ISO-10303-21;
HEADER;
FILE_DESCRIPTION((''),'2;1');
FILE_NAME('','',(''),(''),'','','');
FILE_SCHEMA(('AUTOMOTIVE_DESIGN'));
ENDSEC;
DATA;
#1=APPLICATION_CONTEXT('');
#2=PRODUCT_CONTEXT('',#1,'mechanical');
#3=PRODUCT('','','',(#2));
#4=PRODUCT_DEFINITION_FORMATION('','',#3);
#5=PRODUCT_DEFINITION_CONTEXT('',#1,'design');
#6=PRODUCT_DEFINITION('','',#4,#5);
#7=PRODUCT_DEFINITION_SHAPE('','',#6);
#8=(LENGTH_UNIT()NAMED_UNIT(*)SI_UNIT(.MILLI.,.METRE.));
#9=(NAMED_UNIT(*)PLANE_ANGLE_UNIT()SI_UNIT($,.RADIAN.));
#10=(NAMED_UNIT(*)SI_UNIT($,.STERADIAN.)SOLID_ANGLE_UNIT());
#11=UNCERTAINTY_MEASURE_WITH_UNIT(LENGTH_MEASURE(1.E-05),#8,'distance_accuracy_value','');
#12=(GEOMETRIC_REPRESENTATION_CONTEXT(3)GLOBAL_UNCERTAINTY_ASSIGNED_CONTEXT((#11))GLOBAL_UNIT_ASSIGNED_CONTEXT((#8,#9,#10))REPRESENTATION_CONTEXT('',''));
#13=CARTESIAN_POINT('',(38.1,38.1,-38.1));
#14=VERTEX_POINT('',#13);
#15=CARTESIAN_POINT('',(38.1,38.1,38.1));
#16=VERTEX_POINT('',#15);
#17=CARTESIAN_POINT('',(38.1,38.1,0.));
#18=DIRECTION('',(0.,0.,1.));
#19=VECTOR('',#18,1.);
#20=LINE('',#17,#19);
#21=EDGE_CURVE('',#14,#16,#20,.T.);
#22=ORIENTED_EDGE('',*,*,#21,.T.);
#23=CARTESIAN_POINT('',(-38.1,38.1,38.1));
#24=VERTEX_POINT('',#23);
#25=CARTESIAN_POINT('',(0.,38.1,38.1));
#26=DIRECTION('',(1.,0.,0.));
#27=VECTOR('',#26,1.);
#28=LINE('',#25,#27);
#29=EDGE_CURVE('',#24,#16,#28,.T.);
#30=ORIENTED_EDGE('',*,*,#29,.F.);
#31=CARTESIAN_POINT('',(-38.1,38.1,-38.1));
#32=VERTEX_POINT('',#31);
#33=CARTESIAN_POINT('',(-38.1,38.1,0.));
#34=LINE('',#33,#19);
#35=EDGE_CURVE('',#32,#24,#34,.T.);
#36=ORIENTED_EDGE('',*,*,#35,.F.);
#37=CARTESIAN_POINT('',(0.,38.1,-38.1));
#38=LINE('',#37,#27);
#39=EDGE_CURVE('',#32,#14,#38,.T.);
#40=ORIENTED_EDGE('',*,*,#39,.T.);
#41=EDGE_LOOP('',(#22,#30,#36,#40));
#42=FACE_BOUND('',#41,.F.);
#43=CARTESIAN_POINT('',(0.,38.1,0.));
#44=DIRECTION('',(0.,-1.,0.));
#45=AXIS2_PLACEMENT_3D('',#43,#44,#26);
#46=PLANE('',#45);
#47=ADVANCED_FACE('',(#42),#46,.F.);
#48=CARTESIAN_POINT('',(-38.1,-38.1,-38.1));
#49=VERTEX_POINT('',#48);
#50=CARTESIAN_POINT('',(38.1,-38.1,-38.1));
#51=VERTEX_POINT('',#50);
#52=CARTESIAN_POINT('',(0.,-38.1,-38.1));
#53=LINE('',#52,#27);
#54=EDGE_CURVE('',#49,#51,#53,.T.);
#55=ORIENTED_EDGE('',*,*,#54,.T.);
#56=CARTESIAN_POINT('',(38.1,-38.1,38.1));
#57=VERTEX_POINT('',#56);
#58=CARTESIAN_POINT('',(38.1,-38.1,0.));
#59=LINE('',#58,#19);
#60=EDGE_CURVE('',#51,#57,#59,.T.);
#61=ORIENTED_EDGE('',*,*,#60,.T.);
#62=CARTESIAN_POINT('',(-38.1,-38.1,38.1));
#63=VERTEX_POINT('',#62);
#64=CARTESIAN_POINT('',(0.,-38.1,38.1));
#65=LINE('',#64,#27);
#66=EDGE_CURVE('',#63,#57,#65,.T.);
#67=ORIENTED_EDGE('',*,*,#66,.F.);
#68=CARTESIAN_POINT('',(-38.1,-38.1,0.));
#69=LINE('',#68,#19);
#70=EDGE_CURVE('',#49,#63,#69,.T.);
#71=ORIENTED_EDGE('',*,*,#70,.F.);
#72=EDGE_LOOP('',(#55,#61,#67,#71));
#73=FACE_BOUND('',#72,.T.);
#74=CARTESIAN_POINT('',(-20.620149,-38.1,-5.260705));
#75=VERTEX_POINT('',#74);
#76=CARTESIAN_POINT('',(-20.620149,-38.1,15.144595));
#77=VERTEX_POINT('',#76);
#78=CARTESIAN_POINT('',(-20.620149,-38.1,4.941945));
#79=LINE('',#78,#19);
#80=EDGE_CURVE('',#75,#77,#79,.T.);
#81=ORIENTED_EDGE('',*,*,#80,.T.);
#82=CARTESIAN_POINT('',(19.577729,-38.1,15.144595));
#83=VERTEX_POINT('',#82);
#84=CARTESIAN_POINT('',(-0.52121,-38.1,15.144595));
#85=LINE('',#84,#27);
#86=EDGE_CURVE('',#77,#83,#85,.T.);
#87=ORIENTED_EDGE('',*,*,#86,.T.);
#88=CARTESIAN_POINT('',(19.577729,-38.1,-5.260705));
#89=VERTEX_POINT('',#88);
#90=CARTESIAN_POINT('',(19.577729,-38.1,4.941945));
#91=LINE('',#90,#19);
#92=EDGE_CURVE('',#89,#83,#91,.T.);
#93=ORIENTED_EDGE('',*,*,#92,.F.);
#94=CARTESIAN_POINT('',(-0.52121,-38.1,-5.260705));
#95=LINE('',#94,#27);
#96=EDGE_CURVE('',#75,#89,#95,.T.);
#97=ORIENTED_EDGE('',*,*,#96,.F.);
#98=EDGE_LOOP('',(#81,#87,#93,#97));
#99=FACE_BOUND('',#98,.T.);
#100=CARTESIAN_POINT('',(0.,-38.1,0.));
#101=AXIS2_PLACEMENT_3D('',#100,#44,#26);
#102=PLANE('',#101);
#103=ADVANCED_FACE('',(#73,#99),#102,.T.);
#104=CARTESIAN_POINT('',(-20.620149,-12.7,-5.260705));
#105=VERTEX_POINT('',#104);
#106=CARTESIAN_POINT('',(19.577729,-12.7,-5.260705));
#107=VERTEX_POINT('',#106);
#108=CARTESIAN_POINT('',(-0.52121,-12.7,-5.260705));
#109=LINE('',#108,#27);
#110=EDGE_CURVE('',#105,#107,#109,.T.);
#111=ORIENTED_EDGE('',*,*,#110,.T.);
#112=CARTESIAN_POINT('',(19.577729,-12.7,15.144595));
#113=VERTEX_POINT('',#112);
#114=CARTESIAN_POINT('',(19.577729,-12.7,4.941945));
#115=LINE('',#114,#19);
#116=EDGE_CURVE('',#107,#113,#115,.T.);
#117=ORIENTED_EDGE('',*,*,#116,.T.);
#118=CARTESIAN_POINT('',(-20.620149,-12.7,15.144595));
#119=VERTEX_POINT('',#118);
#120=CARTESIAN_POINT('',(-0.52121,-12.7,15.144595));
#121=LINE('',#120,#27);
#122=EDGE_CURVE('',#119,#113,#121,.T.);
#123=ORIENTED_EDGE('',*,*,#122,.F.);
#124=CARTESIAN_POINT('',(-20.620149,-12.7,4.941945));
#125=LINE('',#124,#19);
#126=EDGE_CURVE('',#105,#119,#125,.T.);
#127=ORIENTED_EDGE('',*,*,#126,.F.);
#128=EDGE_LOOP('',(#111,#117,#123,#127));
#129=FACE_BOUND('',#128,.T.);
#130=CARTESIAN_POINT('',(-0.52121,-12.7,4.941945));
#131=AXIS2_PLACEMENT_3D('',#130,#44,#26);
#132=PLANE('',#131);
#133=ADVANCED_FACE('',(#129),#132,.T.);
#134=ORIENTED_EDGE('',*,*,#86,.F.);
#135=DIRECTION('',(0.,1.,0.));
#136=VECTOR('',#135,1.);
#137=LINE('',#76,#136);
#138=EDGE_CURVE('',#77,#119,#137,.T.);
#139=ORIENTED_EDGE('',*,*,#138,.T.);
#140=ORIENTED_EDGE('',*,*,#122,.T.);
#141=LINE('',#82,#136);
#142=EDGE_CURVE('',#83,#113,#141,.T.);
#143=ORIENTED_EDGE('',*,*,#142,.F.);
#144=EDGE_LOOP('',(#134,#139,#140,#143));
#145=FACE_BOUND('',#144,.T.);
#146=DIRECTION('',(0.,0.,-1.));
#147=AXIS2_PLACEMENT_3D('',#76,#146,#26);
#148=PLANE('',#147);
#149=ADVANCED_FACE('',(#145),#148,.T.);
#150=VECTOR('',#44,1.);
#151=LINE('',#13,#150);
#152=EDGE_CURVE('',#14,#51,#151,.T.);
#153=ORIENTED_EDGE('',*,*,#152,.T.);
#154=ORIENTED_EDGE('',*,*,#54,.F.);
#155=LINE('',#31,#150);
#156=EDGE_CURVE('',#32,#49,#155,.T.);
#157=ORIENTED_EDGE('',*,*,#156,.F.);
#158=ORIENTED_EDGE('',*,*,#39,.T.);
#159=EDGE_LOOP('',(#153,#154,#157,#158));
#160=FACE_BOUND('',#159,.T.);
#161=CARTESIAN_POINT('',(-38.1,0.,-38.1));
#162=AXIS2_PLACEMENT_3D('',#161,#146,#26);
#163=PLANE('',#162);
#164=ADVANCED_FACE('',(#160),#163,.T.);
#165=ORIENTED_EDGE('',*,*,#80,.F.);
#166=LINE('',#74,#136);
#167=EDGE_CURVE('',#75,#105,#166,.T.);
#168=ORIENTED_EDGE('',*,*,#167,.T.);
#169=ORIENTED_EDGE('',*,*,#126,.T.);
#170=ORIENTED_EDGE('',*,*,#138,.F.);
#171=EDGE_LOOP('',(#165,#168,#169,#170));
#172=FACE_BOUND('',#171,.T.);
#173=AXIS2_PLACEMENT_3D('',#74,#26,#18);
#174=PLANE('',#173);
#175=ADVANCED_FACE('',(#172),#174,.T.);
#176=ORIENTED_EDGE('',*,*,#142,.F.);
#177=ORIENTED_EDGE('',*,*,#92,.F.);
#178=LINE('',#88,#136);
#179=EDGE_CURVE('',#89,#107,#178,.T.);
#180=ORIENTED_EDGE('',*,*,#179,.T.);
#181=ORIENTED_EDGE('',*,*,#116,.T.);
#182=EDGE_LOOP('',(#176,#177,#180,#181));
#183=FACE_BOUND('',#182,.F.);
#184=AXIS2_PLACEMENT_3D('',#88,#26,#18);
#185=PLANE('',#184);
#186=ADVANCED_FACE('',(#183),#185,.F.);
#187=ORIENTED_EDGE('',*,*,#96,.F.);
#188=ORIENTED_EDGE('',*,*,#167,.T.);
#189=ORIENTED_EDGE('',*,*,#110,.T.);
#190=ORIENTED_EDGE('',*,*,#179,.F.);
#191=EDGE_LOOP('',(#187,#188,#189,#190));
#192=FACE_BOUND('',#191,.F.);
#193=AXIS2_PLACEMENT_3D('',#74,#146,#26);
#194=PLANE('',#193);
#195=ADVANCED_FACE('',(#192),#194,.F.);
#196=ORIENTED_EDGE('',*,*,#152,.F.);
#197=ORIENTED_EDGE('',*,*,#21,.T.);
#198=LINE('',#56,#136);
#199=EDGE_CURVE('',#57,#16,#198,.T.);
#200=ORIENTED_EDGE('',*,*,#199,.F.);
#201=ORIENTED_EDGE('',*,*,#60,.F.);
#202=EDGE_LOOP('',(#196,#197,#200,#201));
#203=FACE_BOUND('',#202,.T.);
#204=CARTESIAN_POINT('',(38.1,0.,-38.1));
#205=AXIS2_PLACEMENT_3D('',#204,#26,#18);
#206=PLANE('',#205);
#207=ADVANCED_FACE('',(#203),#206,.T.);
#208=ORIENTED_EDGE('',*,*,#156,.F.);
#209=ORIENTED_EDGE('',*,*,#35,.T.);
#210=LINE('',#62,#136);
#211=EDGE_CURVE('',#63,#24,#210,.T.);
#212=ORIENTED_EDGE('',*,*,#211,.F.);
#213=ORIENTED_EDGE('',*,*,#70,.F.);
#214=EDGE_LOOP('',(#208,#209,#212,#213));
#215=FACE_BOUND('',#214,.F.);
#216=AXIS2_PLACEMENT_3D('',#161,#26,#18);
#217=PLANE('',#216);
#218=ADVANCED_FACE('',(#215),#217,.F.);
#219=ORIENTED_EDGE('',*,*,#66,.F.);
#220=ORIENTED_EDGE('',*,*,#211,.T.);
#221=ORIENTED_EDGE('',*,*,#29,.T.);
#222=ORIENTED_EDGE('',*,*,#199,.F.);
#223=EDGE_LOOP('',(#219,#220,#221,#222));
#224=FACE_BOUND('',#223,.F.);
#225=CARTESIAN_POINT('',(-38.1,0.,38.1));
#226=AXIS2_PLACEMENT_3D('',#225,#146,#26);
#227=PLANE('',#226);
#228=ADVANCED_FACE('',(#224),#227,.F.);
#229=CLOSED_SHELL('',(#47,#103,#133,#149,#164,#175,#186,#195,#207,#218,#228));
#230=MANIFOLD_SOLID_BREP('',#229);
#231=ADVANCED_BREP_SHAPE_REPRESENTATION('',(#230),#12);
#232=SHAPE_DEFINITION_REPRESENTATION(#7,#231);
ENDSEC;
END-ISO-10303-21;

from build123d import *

# Parameters (mm, degrees)
F1_W     = 76.2
F1_H     = 76.2
F2_DEPTH = 38.1
F3_W     = 40.1978772134
F3_H     = 20.4053004272
F4_DEPTH = 25.4


# Not quite as in the source:
# - a variable given as a bare number and used for a length is read in inches; the dataset says mm whatever the document's units were


with BuildPart() as f2:
    # F1 (on Front) → F2 (new body, symmetric)
    with BuildSketch(Plane.XZ):
        Rectangle(F1_W, F1_H)
    extrude(amount=F2_DEPTH, both=True)

    # F3 (on face) → F4 (cut)
    with BuildSketch(Plane.XZ.offset(38.1)):
        with Locations((-0.5212100223, 4.9419447314)):
            Rectangle(F3_W, F3_H)
    extrude(amount=-F4_DEPTH, mode=Mode.SUBTRACT)


solid = f2.part
